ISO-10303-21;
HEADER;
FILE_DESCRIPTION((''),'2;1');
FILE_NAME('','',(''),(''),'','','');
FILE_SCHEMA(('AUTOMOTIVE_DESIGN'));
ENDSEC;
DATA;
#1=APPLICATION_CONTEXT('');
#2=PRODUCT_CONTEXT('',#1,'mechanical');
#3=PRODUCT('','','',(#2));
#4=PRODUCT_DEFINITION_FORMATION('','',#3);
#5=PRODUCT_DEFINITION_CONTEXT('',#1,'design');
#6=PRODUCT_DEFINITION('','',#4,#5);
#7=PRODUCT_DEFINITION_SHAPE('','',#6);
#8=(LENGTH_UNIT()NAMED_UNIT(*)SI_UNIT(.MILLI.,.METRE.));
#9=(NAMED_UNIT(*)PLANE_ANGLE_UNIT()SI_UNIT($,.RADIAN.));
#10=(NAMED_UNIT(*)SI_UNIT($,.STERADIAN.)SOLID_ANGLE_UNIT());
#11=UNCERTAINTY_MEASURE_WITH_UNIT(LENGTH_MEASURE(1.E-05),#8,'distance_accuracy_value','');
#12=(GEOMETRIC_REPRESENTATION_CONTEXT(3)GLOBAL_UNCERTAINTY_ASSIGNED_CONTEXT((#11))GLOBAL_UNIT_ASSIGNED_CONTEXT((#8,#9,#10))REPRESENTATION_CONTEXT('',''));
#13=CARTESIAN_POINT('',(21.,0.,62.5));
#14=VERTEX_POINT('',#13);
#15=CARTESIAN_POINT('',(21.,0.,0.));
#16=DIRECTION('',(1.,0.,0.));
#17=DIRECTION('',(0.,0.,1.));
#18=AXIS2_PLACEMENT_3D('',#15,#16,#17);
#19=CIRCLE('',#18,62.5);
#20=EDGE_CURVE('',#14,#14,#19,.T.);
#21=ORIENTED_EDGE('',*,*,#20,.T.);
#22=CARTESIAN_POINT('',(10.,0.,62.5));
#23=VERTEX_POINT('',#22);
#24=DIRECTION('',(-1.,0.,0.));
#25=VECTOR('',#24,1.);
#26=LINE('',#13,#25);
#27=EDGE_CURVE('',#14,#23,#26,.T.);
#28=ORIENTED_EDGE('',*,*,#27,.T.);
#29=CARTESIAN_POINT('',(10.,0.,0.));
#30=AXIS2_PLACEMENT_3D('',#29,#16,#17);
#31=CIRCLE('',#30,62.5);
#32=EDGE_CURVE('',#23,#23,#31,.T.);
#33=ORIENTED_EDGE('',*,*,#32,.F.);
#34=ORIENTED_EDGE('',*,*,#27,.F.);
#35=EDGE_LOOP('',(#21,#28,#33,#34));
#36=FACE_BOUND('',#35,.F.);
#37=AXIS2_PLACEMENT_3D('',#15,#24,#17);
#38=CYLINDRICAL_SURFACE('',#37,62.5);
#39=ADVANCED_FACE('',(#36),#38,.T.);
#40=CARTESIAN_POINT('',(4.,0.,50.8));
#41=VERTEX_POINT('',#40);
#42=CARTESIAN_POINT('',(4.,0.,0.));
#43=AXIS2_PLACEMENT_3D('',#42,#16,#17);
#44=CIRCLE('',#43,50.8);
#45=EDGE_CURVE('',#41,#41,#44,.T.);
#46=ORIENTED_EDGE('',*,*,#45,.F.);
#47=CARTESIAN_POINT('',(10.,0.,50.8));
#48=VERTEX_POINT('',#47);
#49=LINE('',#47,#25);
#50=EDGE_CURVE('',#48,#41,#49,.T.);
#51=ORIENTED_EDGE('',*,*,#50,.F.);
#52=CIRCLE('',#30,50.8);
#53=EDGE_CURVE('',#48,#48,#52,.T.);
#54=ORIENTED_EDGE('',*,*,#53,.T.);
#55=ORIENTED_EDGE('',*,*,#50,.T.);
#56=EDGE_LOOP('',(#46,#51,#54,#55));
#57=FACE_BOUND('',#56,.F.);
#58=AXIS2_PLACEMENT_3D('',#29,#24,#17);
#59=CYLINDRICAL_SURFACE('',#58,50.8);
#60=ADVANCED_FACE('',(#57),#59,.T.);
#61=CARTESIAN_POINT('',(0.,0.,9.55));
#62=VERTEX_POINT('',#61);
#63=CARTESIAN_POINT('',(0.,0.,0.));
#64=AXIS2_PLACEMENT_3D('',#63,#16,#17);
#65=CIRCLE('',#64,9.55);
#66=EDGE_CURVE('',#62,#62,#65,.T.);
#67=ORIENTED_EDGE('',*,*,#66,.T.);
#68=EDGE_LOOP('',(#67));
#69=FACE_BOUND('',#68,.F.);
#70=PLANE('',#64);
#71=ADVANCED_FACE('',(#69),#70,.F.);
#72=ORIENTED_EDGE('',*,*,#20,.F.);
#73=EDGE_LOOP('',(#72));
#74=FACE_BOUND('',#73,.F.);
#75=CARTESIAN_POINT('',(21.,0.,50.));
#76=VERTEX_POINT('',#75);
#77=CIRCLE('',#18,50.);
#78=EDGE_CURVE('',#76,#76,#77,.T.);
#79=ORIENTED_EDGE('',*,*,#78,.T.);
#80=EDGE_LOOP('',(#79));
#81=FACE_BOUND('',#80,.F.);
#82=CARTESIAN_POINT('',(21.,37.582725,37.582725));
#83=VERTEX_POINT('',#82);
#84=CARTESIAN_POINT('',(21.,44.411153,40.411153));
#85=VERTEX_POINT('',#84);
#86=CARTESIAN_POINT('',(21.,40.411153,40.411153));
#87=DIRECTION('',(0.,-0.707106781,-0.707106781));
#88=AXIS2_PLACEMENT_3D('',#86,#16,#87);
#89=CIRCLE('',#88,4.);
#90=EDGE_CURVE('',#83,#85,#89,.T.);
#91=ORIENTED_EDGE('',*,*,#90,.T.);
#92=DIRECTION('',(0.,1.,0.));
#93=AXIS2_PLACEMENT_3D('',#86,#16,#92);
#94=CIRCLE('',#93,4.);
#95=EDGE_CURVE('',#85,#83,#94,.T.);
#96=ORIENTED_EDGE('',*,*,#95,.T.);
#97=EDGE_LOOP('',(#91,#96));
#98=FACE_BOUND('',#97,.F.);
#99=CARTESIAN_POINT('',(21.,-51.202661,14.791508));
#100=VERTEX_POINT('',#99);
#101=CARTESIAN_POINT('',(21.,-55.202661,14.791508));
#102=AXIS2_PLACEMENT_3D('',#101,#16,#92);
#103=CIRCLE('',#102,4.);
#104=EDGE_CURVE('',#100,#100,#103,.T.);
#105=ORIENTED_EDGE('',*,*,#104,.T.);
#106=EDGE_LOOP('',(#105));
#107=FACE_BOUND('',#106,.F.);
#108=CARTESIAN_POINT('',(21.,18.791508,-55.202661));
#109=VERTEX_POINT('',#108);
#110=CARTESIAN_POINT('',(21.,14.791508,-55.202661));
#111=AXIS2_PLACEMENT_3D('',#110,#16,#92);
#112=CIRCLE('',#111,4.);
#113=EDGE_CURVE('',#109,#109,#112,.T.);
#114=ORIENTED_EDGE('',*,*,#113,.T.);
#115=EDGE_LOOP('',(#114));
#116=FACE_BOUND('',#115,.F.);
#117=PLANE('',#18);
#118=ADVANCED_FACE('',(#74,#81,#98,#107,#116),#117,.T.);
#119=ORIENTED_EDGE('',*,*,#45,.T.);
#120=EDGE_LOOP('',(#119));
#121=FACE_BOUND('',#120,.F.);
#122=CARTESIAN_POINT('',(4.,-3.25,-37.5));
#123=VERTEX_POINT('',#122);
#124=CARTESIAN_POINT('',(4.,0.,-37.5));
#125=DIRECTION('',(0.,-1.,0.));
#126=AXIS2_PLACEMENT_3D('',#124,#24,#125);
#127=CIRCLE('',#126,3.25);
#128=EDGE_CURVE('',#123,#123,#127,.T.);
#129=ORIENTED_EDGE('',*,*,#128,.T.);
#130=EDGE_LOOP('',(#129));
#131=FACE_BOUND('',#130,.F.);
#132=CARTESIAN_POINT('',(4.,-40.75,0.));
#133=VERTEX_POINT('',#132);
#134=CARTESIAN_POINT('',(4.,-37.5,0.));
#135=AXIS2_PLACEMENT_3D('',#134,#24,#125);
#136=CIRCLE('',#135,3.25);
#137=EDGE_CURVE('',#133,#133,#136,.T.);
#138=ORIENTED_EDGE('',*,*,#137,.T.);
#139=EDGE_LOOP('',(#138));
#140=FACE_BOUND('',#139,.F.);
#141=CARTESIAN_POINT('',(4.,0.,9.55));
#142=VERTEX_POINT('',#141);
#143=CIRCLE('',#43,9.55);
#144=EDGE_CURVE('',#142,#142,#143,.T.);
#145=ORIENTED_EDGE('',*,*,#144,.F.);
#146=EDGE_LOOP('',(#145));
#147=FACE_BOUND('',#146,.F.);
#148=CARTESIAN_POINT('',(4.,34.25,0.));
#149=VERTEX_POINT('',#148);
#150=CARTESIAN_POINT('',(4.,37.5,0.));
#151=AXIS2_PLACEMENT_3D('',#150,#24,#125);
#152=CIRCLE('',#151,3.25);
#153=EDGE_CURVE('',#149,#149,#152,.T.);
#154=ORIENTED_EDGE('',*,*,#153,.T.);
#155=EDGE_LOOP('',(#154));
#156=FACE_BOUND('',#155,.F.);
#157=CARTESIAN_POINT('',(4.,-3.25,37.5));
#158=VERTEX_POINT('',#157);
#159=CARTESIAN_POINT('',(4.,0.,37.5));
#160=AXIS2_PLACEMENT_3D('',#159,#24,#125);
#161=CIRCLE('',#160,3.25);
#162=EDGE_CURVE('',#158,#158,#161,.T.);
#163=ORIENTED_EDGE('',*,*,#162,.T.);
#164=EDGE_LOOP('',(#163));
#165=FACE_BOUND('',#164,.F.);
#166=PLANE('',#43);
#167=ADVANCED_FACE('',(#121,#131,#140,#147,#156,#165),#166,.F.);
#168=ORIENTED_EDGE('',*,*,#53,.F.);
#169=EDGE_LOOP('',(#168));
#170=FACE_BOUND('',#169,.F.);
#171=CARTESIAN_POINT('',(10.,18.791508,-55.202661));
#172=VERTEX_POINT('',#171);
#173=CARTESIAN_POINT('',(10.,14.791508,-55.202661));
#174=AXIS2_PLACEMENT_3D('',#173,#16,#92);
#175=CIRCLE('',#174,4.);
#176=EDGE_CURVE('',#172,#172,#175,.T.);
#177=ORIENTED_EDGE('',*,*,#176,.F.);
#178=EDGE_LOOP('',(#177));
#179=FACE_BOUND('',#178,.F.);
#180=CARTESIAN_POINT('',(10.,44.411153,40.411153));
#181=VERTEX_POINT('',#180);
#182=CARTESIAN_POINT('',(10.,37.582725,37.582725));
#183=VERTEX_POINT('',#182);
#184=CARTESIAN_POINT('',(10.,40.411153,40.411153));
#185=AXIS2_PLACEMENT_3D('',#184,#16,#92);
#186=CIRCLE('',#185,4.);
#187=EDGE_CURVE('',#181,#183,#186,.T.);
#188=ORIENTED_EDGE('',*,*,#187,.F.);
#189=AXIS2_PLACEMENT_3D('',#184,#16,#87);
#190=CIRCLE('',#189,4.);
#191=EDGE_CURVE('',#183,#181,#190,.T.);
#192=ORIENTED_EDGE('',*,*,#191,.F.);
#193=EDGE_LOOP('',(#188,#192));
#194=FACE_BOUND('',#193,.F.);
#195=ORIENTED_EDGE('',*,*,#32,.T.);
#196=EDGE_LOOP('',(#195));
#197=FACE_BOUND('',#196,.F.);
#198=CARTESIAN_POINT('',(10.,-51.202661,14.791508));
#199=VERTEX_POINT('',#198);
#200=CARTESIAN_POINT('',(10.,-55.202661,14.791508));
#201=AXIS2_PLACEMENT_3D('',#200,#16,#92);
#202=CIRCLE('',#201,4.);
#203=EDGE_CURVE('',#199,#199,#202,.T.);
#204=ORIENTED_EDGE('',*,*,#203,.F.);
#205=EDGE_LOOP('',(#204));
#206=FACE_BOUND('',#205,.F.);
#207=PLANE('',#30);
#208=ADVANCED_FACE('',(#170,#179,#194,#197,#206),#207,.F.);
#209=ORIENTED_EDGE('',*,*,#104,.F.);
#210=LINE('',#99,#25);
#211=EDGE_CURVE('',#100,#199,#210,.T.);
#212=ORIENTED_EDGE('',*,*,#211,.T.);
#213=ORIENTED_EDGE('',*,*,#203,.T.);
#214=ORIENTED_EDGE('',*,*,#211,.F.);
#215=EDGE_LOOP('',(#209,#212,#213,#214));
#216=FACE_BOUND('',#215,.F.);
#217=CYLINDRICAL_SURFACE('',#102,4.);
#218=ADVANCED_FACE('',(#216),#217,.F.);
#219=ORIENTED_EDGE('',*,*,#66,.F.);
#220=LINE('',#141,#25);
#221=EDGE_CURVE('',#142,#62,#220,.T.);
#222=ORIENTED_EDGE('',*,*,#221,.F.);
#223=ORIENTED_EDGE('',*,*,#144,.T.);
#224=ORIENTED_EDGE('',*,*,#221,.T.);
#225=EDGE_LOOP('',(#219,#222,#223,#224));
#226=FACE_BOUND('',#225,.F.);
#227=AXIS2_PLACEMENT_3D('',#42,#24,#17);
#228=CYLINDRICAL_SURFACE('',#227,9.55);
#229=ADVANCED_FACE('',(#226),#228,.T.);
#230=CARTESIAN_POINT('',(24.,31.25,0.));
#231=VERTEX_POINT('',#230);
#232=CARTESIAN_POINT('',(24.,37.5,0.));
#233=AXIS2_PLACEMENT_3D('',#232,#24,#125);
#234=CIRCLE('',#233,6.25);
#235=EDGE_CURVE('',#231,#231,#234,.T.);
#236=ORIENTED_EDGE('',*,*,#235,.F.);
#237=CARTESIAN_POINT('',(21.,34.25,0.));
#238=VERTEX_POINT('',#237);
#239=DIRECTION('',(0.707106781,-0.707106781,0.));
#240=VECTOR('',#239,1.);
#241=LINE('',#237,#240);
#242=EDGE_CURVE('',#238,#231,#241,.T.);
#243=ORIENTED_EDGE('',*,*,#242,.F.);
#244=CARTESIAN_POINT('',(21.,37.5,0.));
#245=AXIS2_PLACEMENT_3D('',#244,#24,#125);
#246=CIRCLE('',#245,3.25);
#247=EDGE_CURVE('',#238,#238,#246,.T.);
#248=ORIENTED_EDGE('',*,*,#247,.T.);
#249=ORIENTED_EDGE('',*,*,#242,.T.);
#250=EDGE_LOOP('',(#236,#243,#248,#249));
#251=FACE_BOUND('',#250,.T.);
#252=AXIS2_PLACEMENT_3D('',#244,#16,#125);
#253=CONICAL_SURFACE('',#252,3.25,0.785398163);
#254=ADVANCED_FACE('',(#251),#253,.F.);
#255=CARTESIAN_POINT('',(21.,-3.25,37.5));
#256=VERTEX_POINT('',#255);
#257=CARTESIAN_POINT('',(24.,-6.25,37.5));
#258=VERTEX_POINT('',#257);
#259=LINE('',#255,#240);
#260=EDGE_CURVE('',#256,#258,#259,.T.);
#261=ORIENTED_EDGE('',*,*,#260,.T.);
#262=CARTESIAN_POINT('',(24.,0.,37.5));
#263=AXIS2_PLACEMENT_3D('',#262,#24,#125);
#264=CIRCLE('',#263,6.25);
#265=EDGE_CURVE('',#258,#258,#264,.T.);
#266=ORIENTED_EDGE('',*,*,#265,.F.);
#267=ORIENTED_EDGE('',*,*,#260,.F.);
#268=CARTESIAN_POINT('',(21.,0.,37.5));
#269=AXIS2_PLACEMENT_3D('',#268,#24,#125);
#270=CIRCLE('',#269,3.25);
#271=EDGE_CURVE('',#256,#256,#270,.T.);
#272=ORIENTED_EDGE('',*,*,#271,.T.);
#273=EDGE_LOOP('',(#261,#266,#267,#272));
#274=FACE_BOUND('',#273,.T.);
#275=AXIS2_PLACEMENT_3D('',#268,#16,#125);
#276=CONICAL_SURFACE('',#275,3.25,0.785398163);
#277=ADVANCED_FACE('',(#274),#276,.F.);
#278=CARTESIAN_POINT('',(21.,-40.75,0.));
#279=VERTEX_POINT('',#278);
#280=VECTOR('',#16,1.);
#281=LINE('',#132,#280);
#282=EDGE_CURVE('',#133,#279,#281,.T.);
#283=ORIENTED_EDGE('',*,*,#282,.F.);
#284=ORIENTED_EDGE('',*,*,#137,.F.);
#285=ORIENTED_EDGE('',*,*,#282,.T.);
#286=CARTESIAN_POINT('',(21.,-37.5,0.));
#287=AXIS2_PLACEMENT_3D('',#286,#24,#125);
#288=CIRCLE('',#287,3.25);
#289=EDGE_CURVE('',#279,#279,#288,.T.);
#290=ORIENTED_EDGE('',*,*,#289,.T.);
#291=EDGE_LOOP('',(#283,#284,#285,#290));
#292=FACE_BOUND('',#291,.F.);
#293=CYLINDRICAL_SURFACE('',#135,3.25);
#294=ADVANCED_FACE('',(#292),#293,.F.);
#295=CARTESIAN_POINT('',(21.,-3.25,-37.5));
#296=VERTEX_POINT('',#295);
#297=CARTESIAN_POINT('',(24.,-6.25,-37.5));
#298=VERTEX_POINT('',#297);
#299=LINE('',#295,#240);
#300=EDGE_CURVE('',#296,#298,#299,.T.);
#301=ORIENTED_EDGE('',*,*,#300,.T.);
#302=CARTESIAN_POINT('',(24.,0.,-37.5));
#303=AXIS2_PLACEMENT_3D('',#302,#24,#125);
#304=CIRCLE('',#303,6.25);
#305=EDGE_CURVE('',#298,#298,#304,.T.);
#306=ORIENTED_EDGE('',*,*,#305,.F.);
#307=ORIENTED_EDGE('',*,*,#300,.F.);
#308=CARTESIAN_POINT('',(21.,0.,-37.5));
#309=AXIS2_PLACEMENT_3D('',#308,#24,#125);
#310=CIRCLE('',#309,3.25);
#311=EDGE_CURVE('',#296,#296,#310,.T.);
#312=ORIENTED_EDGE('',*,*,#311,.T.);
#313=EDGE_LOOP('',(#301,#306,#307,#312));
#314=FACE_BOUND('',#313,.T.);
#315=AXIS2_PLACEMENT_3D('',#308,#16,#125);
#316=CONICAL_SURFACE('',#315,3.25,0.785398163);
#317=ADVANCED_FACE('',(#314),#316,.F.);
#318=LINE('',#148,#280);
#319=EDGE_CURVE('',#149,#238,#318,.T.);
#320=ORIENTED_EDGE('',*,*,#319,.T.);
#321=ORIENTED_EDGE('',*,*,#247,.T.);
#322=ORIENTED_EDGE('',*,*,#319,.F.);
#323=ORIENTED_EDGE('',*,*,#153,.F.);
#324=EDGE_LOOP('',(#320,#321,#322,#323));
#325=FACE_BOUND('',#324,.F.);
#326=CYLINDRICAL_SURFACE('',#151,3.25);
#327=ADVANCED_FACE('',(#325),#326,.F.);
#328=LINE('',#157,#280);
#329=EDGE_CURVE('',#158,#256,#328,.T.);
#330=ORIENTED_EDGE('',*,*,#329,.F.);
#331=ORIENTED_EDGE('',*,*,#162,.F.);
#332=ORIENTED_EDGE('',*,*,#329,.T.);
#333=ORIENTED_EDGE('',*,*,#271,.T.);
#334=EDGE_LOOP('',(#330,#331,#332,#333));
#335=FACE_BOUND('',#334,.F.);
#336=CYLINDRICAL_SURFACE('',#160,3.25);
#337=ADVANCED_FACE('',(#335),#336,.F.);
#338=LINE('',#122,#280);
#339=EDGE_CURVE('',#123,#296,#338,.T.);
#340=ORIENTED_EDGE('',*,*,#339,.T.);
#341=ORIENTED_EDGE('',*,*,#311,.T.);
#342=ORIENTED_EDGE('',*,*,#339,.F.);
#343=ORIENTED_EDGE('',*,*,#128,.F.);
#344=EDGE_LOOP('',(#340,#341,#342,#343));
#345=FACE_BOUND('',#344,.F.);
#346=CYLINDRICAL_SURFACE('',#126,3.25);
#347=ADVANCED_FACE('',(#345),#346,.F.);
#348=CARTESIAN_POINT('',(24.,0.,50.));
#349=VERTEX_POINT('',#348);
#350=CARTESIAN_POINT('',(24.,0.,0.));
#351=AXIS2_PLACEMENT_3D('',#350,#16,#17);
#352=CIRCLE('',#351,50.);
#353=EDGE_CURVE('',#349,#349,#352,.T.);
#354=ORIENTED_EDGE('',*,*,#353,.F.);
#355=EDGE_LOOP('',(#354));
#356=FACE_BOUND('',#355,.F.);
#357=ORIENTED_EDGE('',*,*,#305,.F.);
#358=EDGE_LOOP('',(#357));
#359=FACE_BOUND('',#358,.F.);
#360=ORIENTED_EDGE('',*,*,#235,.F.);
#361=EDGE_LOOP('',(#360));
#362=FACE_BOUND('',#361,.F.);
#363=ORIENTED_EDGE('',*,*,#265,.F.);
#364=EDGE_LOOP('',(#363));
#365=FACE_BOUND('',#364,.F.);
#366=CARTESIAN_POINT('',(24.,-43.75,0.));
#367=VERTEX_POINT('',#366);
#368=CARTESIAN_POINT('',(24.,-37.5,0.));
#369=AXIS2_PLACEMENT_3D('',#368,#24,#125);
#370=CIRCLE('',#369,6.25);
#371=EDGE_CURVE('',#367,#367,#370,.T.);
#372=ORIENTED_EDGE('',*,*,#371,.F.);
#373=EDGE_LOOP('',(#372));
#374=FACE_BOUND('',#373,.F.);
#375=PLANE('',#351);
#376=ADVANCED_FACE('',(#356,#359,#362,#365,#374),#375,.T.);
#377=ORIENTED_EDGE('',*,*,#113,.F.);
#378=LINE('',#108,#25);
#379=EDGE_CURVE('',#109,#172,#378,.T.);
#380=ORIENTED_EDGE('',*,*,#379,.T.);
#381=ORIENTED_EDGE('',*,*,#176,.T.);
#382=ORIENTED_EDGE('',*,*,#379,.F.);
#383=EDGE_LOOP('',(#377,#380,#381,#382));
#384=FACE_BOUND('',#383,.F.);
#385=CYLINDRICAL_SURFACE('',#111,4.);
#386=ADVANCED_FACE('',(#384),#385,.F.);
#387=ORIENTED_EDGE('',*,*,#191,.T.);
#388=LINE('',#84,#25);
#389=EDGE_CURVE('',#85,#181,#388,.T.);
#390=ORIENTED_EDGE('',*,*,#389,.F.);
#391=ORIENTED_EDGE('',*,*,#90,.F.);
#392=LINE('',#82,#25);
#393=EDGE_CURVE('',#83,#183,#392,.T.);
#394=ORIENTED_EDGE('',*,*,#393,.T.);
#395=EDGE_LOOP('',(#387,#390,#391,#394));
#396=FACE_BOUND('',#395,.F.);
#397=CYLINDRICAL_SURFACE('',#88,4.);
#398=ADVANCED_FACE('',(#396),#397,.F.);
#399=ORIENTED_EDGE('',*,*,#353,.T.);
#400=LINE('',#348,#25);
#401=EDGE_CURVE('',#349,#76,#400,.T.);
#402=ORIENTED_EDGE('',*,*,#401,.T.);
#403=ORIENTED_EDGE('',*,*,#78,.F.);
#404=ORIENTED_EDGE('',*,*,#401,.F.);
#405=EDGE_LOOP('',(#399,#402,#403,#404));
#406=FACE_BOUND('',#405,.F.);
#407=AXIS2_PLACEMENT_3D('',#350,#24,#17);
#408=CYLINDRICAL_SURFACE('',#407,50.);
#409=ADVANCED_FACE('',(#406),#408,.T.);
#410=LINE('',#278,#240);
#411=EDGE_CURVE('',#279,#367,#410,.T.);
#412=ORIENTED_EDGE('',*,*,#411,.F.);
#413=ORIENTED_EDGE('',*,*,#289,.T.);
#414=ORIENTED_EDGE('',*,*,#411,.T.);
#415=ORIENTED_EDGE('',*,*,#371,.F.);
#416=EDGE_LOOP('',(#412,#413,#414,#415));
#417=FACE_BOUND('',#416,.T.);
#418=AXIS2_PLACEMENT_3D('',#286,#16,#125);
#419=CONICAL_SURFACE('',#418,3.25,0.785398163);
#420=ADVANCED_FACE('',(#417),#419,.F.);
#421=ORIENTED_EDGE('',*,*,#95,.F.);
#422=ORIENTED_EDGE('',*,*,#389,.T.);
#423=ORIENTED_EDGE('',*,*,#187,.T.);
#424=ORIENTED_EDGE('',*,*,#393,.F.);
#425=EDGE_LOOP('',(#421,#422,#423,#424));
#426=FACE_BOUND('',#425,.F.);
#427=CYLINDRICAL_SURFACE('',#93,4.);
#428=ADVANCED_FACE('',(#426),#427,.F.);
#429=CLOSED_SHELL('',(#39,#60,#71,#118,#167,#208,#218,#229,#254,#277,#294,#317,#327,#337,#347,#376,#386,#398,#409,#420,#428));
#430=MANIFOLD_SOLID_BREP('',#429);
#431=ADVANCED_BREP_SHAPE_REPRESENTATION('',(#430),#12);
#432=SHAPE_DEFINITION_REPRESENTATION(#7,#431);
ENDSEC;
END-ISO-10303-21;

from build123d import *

# Parameters (mm, degrees)
F2_R     = 4
F3_DEPTH = 25
F4_R     = 3.25
F5_DEPTH = 25
F6_SIZE  = 3


# Not quite as in the source:
# - a feature names something its author has since deleted; it is built from what else it names


with BuildPart() as f1:
    # F0 (on Front) → F1 (revolve)
    with BuildSketch(Plane.XZ):
        Polygon((0, 9.55), (0, 0), (17.623, 0), (24, 0), (24, 50), (21, 50), (21, 62.5), (10, 62.5), (10, 50.8), (4, 50.8), (4, 9.55), align=None)
    revolve(axis=Axis((8.8115, 0, 0), (1, 0, 0)))

    # F2 (on face) → F3 (cut)
    with BuildSketch(Plane.YZ.offset(21)):
        with BuildLine():
            ThreePointArc((44.4111525448, 40.4111525448), (38.8804188154, 44.1066706749), (37.5827254201, 37.5827254201))
            ThreePointArc((37.5827254201, 37.5827254201), (41.9418862743, 36.7156344148), (44.4111525448, 40.4111525448))
        make_face()
        with Locations((-55.2026609724, 14.7915084276)):
            Circle(F2_R)
        with Locations((14.7915084276, -55.2026609724)):
            Circle(F2_R)
    extrude(amount=-F3_DEPTH, mode=Mode.SUBTRACT)

    # F4 (on face) → F5 (cut)
    with BuildSketch(Plane(origin=(4, 0, 0), x_dir=(0, -1, 0), z_dir=(-1, 0, 0))):
        with Locations((0, 37.5)):
            Circle(F4_R)
        with Locations((-37.5, 0)):
            Circle(F4_R)
        with Locations((0, -37.5)):
            Circle(F4_R)
        with Locations((37.5, 0)):
            Circle(F4_R)
    extrude(amount=-F5_DEPTH, mode=Mode.SUBTRACT)

    # F6
    f6_edges = [f1.edges().sort_by_distance(p)[0] for p in [
        (24, -34.25, 0),
        (24, 3.25, 37.5),
        (24, 40.75, 0),
        (24, 3.25, -37.5),
    ]]
    chamfer(f6_edges, length=F6_SIZE)


solid = f1.part
